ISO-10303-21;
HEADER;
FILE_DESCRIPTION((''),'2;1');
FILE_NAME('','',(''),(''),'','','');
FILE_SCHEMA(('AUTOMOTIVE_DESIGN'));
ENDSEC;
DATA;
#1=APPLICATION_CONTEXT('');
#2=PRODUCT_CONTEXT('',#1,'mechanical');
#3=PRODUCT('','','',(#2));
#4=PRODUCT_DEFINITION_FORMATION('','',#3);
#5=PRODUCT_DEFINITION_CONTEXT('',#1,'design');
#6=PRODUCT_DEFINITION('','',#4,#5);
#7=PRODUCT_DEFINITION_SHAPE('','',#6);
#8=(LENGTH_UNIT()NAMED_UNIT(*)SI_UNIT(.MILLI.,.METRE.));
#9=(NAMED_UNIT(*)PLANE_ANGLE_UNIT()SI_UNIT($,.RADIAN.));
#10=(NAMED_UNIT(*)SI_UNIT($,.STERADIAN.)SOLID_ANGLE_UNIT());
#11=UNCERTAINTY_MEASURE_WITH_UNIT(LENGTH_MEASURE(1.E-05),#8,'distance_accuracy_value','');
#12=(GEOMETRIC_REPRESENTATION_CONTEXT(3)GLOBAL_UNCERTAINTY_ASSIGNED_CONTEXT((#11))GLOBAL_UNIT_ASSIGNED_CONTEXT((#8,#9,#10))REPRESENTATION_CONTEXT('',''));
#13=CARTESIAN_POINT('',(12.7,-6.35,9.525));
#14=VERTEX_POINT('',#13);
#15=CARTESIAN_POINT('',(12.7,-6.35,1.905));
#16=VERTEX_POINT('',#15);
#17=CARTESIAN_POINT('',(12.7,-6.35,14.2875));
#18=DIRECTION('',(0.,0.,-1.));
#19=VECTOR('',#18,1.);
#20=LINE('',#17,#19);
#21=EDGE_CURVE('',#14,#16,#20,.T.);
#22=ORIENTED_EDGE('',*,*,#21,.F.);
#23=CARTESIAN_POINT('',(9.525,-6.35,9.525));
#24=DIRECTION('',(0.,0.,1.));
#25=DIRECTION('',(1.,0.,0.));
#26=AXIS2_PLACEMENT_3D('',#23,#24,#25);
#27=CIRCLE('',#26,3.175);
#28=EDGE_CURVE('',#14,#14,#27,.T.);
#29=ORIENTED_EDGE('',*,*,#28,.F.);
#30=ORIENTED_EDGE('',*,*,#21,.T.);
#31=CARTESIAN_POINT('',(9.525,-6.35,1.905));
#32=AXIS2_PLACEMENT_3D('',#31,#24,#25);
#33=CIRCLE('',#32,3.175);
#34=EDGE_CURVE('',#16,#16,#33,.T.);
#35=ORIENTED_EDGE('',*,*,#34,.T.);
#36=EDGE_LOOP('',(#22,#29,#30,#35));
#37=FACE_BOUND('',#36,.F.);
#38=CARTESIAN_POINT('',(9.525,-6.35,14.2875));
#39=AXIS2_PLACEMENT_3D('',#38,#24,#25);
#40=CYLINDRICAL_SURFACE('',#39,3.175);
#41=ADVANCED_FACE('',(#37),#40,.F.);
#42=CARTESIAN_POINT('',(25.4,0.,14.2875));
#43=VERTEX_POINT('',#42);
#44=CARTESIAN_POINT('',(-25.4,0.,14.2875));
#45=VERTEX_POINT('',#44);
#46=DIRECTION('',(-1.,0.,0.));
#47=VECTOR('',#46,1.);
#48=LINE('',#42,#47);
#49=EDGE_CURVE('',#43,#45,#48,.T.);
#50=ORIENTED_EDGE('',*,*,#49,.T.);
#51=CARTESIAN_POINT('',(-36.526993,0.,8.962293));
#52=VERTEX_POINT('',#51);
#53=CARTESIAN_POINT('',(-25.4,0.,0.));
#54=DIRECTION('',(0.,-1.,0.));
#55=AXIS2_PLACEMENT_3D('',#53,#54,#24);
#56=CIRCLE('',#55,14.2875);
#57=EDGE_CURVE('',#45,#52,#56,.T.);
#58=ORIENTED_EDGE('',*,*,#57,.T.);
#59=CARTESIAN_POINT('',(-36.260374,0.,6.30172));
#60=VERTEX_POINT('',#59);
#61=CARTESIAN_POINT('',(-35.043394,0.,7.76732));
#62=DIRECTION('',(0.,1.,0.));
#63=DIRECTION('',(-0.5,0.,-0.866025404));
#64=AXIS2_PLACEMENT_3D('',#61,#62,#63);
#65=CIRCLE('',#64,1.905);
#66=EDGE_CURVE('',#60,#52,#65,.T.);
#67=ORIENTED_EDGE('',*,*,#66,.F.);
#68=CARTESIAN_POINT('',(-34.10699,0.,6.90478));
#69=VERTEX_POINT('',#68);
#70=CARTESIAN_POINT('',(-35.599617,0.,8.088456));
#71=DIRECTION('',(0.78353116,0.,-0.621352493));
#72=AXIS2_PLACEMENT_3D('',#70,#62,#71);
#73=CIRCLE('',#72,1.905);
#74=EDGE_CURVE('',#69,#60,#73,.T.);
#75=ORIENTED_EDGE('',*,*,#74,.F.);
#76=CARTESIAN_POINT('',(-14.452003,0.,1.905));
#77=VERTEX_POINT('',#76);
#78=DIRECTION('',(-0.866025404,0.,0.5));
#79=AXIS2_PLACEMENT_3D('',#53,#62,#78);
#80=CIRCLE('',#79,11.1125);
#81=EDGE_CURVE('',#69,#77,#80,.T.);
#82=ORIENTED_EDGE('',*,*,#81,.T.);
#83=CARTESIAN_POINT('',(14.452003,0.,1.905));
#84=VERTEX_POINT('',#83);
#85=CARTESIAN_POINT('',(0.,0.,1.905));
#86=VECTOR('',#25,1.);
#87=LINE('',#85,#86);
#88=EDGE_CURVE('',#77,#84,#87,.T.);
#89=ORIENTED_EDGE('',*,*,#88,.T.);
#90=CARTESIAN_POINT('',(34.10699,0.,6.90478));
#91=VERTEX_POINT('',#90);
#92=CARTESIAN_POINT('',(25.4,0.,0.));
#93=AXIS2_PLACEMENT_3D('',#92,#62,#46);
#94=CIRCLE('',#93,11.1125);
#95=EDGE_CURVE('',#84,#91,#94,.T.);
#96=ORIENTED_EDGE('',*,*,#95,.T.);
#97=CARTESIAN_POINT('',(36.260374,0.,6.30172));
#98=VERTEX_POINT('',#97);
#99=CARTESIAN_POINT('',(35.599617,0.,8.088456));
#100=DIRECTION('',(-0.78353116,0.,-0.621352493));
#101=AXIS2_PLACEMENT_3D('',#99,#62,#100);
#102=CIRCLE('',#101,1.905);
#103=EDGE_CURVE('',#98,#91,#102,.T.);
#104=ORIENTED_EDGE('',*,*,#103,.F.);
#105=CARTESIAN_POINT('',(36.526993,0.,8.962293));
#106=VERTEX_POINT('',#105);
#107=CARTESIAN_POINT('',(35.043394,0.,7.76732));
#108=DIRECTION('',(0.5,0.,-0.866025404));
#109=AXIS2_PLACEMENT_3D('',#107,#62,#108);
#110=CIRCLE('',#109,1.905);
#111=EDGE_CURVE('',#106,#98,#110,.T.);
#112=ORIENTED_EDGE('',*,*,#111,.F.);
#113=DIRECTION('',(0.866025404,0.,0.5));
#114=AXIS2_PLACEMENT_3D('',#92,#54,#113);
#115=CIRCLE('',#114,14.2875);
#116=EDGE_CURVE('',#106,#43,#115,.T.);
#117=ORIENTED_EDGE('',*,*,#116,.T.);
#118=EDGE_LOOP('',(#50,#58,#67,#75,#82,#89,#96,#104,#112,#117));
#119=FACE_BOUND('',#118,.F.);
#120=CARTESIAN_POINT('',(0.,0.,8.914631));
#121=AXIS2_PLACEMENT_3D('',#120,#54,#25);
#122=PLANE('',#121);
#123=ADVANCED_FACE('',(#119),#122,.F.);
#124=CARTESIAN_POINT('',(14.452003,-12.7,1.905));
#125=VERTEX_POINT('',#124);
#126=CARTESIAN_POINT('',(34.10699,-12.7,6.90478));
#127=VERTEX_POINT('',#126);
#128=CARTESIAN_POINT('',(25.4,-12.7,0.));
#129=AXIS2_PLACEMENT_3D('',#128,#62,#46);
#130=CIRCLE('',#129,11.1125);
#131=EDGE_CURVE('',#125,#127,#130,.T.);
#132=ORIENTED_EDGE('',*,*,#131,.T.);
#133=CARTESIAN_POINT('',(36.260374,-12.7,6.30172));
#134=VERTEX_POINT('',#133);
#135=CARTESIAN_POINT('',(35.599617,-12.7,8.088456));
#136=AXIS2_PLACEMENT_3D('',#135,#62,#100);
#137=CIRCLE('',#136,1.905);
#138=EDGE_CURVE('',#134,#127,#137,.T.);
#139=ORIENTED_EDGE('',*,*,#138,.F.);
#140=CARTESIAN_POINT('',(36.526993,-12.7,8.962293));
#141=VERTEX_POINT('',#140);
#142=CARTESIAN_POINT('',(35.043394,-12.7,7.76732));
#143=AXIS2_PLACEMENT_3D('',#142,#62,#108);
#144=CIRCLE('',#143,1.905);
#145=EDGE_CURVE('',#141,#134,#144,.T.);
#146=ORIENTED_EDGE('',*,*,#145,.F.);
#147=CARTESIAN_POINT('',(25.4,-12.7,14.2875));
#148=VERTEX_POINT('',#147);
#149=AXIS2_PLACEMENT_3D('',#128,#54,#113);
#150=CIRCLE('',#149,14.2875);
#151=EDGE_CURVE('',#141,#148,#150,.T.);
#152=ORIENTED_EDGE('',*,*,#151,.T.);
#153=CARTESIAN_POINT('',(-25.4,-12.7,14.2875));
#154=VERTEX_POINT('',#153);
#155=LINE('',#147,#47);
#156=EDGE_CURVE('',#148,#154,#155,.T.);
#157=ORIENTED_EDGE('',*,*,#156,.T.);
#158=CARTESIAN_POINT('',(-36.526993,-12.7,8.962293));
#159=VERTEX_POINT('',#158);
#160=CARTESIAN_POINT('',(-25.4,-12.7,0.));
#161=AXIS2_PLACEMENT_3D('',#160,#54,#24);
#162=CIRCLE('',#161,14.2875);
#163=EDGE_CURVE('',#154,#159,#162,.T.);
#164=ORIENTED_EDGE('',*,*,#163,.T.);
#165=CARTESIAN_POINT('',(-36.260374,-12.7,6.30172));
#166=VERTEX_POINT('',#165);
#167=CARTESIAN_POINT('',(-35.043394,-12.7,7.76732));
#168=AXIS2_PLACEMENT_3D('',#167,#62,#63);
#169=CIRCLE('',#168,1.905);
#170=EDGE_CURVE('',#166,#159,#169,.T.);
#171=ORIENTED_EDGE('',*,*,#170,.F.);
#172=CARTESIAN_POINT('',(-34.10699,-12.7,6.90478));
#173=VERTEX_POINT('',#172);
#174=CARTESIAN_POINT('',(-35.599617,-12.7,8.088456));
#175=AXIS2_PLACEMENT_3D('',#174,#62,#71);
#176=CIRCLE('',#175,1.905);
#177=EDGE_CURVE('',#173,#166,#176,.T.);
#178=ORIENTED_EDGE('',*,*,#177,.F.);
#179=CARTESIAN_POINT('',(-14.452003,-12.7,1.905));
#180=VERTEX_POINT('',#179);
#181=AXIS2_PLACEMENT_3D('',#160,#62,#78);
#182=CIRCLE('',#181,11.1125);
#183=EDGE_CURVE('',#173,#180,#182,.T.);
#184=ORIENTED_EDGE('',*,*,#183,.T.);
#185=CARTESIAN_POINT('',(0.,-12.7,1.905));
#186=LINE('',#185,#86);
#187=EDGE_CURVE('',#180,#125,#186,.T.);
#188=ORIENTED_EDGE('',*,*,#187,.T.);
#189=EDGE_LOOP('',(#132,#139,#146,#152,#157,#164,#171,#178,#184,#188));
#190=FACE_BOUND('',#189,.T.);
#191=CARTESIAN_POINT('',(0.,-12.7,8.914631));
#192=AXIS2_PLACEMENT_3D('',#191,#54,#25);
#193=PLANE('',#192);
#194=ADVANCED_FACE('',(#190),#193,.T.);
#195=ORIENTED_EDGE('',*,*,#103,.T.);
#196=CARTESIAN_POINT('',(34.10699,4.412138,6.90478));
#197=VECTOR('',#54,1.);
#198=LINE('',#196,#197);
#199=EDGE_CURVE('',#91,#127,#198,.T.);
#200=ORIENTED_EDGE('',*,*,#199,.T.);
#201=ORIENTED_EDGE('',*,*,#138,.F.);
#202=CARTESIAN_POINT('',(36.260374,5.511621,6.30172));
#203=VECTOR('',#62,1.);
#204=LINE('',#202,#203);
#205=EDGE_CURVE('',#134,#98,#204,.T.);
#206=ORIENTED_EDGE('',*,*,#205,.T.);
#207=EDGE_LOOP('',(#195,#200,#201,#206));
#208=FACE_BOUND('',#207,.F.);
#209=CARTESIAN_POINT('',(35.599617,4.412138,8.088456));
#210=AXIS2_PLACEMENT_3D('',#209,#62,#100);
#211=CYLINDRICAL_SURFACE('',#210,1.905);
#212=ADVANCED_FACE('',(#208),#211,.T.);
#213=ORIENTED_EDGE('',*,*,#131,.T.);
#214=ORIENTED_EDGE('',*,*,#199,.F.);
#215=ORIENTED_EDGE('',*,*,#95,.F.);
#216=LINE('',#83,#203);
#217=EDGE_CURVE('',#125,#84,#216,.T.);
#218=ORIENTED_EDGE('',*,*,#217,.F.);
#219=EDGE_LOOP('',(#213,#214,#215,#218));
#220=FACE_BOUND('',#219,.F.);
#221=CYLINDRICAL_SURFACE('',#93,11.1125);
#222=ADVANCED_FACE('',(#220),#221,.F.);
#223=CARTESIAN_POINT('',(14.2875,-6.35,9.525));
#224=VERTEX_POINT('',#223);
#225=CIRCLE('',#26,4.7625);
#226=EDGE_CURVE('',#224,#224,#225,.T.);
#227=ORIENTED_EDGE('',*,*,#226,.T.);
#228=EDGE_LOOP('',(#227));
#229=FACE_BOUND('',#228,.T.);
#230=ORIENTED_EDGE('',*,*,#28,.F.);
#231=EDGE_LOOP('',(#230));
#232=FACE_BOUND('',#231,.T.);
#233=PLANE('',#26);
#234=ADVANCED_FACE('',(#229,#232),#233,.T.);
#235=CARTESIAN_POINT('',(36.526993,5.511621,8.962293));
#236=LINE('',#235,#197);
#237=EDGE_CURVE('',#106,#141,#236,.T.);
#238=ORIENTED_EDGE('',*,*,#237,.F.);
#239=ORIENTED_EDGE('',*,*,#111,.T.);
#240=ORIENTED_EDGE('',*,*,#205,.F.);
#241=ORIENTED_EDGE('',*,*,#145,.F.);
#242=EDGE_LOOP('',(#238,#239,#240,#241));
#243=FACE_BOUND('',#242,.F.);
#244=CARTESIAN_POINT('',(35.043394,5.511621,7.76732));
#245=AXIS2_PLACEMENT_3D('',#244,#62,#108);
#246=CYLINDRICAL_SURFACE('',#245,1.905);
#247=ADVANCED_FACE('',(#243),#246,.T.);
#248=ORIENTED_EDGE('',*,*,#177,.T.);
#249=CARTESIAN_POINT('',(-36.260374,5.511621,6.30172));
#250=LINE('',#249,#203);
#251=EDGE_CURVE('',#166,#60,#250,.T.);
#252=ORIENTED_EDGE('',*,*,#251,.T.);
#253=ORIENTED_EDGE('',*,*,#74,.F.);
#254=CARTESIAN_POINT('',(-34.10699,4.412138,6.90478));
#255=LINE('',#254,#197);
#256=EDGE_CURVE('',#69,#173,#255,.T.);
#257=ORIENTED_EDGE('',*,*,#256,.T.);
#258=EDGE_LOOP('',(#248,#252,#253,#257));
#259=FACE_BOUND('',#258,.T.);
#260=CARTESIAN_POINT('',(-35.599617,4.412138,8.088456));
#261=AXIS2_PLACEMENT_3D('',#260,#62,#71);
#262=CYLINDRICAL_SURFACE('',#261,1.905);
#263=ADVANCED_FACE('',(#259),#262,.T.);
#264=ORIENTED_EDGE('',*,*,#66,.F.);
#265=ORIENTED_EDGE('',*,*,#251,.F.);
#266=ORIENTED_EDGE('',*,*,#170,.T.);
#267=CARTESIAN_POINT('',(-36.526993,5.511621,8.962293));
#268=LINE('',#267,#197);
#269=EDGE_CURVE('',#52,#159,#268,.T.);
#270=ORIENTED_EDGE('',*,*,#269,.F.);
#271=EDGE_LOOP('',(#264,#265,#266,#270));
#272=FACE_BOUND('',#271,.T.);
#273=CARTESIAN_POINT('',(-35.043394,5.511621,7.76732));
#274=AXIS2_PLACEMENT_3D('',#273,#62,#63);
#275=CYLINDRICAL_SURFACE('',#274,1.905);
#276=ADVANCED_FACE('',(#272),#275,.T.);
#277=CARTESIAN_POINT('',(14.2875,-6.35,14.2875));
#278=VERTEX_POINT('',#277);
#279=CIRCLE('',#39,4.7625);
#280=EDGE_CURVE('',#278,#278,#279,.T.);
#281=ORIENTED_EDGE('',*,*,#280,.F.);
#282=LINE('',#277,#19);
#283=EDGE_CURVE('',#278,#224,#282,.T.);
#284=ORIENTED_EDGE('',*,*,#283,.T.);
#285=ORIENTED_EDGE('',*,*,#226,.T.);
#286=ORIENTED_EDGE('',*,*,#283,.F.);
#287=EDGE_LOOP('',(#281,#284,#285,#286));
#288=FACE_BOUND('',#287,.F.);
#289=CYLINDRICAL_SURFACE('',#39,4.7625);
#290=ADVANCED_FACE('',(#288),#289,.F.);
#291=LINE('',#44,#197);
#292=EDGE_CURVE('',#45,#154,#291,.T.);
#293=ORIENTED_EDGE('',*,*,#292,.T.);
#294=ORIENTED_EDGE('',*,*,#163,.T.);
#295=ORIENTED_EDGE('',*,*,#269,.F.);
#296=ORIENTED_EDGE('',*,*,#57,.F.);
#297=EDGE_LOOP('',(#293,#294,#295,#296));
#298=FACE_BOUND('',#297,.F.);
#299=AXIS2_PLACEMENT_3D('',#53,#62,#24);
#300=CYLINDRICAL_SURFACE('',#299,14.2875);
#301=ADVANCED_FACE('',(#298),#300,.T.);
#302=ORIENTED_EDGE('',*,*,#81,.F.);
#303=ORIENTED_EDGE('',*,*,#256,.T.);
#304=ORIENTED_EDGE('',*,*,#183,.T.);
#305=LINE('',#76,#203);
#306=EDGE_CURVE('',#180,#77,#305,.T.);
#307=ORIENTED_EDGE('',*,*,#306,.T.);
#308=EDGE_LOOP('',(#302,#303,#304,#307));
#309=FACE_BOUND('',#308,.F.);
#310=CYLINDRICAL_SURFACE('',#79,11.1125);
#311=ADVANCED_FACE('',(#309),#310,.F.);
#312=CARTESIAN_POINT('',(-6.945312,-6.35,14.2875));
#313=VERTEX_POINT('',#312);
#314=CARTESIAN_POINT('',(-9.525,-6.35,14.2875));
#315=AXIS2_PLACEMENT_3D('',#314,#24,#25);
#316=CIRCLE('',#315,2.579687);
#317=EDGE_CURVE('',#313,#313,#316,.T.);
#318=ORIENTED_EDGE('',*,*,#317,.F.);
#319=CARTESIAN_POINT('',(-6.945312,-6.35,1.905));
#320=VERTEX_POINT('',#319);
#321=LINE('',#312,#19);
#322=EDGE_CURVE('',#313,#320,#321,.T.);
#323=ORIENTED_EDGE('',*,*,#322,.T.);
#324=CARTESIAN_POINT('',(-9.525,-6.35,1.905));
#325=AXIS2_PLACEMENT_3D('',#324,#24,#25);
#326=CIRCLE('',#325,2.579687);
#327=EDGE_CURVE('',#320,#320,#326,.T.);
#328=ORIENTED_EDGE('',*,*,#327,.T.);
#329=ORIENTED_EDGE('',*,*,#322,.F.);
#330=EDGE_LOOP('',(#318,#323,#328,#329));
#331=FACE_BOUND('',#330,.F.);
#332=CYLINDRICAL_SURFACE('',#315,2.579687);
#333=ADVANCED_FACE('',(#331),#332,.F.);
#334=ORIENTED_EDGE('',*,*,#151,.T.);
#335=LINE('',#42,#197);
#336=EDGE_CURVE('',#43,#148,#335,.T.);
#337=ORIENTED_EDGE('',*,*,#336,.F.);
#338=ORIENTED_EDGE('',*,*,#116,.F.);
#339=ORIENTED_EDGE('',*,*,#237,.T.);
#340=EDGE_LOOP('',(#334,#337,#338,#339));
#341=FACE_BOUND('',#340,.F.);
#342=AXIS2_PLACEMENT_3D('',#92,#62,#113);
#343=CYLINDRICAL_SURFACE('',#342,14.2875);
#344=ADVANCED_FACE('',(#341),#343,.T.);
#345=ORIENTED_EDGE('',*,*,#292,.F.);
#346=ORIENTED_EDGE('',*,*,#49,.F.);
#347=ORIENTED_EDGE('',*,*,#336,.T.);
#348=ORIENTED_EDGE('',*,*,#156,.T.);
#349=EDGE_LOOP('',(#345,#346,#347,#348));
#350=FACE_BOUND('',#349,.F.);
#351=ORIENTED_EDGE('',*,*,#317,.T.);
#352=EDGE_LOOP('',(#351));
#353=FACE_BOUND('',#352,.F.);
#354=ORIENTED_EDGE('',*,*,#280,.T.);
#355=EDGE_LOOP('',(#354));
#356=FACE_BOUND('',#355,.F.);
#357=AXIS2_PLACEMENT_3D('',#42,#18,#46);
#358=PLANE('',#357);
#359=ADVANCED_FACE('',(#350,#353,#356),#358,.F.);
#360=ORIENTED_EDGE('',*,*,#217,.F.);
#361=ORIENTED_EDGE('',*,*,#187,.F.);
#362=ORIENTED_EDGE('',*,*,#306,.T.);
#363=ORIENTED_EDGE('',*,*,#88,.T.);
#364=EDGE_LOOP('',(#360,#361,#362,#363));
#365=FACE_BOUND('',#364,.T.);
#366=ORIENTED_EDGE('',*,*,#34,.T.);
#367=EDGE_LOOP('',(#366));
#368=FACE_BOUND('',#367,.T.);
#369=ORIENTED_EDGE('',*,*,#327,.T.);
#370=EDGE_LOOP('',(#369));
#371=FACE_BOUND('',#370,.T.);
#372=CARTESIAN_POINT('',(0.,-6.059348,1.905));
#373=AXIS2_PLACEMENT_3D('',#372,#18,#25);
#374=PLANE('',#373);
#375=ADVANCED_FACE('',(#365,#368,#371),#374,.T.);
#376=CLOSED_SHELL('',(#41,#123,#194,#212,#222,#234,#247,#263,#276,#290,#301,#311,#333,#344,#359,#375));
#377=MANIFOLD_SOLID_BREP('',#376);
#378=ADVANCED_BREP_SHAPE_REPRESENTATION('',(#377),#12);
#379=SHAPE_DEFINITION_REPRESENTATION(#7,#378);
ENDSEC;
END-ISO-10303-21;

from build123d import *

# Parameters (mm, degrees)
F1_DEPTH    = 12.7
F2_R        = 3.175
F2_R_2      = 2.5796875
F3_DEPTH    = 14.2885
F2_R_3      = 4.7625
F4_DEPTH    = 4.7625
F7_T1_DEPTH = 23.7232420224
F7_T3_DEPTH = 21.5242768354
F8_W        = 32.2767272592
F8_H        = 15.9856376707
F9_DEPTH    = 1.905


# Not quite as in the source:
# - a fillet or chamfer that OpenCascade refuses, or shapes differently, is made with other operations: its cross-section is extruded or revolved along the edge and cut away or added


with BuildPart() as f1:
    # F0 (on Front) → F1 (new body)
    with BuildSketch(Plane.XZ):
        with BuildLine():
            ThreePointArc((-35.0237072996, 5.55625), (-22.5238733613, 10.7338507446), (-14.2875, 0))
            Line((-14.2875, 0), (0, 0))
            Line((0, 0), (14.2875, 0))
            ThreePointArc((14.2875, 0), (22.5238733613, 10.7338507446), (35.0237072996, 5.55625))
            Line((35.0237072996, 5.55625), (37.7733379566, 7.14375))
            ThreePointArc((37.7733379566, 7.14375), (32.54375, 12.3733379566), (25.4, 14.2875))
            Line((25.4, 14.2875), (0, 14.2875))
            Line((0, 14.2875), (-25.4, 14.2875))
            ThreePointArc((-25.4, 14.2875), (-32.54375, 12.3733379566), (-37.7733379566, 7.14375))
            Line((-37.7733379566, 7.14375), (-35.0237072996, 5.55625))
        make_face()
    extrude(amount=F1_DEPTH)

    # F2 (on face) → F3 (cut, through all)
    with BuildSketch(Plane.XY.offset(14.2875)):
        with Locations((9.525, -6.35)):
            Circle(F2_R)
        with Locations((-9.525, -6.35)):
            Circle(F2_R_2)
    extrude(amount=-F3_DEPTH, mode=Mode.SUBTRACT)

    # F2 (on face) → F4 (cut)
    with BuildSketch(Plane.XY.offset(14.2875)):
        with Locations((9.525, -6.35)):
            Circle(F2_R_3)
        with Locations((9.525, -6.35)):
            Circle(F2_R, mode=Mode.SUBTRACT)
    extrude(amount=-F4_DEPTH, mode=Mode.SUBTRACT)

    # F7: fillet of radius 1.905 on 4 edges, made by hand

    # F7_s2 → F7_t1 (cut)
    with BuildSketch(Plane.XZ.offset(-5.5116210112)):
        with BuildLine():
            ThreePointArc((-35.9958935884, 6.1175420156), (-36.9160377964, 7.4177082385), (-36.526992602, 8.9622927805))
            ThreePointArc((-36.526992602, 8.9622927805), (-37.1852941649, 8.0770971084), (-37.7733379566, 7.14375))
            Line((-37.7733379566, 7.14375), (-35.9958935884, 6.1175420156))
        make_face()
        with BuildLine():
            ThreePointArc((35.9958935884, 6.1175420156), (36.9160377964, 7.4177082385), (36.526992602, 8.9622927805))
            ThreePointArc((36.526992602, 8.9622927805), (37.1852941649, 8.0770971084), (37.7733379566, 7.14375))
            Line((37.7733379566, 7.14375), (35.9958935884, 6.1175420156))
        make_face()
    extrude(amount=F7_T1_DEPTH, mode=Mode.SUBTRACT)

    # F7_s4 → F7_t3 (cut)
    with BuildSketch(Plane.XZ.offset(-4.4121384177)):
        with BuildLine():
            ThreePointArc((-34.1069900207, 6.9047795786), (-35.242899906, 6.2171522544), (-36.5521168814, 6.4386776835))
            Line((-36.5521168814, 6.4386776835), (-35.0237072996, 5.55625))
            ThreePointArc((-35.0237072996, 5.55625), (-34.5901169235, 6.2473520136), (-34.1069900207, 6.9047795786))
        make_face()
        with BuildLine():
            ThreePointArc((34.1069900207, 6.9047795786), (35.242899906, 6.2171522544), (36.5521168814, 6.4386776835))
            Line((36.5521168814, 6.4386776835), (35.0237072996, 5.55625))
            ThreePointArc((35.0237072996, 5.55625), (34.5901169235, 6.2473520136), (34.1069900207, 6.9047795786))
        make_face()
    extrude(amount=F7_T3_DEPTH, mode=Mode.SUBTRACT)

    # F8 (on face) → F9 (cut)
    with BuildSketch(Plane(origin=(0, 0, 0), x_dir=(1, 0, 0), z_dir=(0, 0, -1))):
        with Locations((0, 6.0593477681)):
            Rectangle(F8_W, F8_H)
    extrude(amount=-F9_DEPTH, mode=Mode.SUBTRACT)


solid = f1.part
